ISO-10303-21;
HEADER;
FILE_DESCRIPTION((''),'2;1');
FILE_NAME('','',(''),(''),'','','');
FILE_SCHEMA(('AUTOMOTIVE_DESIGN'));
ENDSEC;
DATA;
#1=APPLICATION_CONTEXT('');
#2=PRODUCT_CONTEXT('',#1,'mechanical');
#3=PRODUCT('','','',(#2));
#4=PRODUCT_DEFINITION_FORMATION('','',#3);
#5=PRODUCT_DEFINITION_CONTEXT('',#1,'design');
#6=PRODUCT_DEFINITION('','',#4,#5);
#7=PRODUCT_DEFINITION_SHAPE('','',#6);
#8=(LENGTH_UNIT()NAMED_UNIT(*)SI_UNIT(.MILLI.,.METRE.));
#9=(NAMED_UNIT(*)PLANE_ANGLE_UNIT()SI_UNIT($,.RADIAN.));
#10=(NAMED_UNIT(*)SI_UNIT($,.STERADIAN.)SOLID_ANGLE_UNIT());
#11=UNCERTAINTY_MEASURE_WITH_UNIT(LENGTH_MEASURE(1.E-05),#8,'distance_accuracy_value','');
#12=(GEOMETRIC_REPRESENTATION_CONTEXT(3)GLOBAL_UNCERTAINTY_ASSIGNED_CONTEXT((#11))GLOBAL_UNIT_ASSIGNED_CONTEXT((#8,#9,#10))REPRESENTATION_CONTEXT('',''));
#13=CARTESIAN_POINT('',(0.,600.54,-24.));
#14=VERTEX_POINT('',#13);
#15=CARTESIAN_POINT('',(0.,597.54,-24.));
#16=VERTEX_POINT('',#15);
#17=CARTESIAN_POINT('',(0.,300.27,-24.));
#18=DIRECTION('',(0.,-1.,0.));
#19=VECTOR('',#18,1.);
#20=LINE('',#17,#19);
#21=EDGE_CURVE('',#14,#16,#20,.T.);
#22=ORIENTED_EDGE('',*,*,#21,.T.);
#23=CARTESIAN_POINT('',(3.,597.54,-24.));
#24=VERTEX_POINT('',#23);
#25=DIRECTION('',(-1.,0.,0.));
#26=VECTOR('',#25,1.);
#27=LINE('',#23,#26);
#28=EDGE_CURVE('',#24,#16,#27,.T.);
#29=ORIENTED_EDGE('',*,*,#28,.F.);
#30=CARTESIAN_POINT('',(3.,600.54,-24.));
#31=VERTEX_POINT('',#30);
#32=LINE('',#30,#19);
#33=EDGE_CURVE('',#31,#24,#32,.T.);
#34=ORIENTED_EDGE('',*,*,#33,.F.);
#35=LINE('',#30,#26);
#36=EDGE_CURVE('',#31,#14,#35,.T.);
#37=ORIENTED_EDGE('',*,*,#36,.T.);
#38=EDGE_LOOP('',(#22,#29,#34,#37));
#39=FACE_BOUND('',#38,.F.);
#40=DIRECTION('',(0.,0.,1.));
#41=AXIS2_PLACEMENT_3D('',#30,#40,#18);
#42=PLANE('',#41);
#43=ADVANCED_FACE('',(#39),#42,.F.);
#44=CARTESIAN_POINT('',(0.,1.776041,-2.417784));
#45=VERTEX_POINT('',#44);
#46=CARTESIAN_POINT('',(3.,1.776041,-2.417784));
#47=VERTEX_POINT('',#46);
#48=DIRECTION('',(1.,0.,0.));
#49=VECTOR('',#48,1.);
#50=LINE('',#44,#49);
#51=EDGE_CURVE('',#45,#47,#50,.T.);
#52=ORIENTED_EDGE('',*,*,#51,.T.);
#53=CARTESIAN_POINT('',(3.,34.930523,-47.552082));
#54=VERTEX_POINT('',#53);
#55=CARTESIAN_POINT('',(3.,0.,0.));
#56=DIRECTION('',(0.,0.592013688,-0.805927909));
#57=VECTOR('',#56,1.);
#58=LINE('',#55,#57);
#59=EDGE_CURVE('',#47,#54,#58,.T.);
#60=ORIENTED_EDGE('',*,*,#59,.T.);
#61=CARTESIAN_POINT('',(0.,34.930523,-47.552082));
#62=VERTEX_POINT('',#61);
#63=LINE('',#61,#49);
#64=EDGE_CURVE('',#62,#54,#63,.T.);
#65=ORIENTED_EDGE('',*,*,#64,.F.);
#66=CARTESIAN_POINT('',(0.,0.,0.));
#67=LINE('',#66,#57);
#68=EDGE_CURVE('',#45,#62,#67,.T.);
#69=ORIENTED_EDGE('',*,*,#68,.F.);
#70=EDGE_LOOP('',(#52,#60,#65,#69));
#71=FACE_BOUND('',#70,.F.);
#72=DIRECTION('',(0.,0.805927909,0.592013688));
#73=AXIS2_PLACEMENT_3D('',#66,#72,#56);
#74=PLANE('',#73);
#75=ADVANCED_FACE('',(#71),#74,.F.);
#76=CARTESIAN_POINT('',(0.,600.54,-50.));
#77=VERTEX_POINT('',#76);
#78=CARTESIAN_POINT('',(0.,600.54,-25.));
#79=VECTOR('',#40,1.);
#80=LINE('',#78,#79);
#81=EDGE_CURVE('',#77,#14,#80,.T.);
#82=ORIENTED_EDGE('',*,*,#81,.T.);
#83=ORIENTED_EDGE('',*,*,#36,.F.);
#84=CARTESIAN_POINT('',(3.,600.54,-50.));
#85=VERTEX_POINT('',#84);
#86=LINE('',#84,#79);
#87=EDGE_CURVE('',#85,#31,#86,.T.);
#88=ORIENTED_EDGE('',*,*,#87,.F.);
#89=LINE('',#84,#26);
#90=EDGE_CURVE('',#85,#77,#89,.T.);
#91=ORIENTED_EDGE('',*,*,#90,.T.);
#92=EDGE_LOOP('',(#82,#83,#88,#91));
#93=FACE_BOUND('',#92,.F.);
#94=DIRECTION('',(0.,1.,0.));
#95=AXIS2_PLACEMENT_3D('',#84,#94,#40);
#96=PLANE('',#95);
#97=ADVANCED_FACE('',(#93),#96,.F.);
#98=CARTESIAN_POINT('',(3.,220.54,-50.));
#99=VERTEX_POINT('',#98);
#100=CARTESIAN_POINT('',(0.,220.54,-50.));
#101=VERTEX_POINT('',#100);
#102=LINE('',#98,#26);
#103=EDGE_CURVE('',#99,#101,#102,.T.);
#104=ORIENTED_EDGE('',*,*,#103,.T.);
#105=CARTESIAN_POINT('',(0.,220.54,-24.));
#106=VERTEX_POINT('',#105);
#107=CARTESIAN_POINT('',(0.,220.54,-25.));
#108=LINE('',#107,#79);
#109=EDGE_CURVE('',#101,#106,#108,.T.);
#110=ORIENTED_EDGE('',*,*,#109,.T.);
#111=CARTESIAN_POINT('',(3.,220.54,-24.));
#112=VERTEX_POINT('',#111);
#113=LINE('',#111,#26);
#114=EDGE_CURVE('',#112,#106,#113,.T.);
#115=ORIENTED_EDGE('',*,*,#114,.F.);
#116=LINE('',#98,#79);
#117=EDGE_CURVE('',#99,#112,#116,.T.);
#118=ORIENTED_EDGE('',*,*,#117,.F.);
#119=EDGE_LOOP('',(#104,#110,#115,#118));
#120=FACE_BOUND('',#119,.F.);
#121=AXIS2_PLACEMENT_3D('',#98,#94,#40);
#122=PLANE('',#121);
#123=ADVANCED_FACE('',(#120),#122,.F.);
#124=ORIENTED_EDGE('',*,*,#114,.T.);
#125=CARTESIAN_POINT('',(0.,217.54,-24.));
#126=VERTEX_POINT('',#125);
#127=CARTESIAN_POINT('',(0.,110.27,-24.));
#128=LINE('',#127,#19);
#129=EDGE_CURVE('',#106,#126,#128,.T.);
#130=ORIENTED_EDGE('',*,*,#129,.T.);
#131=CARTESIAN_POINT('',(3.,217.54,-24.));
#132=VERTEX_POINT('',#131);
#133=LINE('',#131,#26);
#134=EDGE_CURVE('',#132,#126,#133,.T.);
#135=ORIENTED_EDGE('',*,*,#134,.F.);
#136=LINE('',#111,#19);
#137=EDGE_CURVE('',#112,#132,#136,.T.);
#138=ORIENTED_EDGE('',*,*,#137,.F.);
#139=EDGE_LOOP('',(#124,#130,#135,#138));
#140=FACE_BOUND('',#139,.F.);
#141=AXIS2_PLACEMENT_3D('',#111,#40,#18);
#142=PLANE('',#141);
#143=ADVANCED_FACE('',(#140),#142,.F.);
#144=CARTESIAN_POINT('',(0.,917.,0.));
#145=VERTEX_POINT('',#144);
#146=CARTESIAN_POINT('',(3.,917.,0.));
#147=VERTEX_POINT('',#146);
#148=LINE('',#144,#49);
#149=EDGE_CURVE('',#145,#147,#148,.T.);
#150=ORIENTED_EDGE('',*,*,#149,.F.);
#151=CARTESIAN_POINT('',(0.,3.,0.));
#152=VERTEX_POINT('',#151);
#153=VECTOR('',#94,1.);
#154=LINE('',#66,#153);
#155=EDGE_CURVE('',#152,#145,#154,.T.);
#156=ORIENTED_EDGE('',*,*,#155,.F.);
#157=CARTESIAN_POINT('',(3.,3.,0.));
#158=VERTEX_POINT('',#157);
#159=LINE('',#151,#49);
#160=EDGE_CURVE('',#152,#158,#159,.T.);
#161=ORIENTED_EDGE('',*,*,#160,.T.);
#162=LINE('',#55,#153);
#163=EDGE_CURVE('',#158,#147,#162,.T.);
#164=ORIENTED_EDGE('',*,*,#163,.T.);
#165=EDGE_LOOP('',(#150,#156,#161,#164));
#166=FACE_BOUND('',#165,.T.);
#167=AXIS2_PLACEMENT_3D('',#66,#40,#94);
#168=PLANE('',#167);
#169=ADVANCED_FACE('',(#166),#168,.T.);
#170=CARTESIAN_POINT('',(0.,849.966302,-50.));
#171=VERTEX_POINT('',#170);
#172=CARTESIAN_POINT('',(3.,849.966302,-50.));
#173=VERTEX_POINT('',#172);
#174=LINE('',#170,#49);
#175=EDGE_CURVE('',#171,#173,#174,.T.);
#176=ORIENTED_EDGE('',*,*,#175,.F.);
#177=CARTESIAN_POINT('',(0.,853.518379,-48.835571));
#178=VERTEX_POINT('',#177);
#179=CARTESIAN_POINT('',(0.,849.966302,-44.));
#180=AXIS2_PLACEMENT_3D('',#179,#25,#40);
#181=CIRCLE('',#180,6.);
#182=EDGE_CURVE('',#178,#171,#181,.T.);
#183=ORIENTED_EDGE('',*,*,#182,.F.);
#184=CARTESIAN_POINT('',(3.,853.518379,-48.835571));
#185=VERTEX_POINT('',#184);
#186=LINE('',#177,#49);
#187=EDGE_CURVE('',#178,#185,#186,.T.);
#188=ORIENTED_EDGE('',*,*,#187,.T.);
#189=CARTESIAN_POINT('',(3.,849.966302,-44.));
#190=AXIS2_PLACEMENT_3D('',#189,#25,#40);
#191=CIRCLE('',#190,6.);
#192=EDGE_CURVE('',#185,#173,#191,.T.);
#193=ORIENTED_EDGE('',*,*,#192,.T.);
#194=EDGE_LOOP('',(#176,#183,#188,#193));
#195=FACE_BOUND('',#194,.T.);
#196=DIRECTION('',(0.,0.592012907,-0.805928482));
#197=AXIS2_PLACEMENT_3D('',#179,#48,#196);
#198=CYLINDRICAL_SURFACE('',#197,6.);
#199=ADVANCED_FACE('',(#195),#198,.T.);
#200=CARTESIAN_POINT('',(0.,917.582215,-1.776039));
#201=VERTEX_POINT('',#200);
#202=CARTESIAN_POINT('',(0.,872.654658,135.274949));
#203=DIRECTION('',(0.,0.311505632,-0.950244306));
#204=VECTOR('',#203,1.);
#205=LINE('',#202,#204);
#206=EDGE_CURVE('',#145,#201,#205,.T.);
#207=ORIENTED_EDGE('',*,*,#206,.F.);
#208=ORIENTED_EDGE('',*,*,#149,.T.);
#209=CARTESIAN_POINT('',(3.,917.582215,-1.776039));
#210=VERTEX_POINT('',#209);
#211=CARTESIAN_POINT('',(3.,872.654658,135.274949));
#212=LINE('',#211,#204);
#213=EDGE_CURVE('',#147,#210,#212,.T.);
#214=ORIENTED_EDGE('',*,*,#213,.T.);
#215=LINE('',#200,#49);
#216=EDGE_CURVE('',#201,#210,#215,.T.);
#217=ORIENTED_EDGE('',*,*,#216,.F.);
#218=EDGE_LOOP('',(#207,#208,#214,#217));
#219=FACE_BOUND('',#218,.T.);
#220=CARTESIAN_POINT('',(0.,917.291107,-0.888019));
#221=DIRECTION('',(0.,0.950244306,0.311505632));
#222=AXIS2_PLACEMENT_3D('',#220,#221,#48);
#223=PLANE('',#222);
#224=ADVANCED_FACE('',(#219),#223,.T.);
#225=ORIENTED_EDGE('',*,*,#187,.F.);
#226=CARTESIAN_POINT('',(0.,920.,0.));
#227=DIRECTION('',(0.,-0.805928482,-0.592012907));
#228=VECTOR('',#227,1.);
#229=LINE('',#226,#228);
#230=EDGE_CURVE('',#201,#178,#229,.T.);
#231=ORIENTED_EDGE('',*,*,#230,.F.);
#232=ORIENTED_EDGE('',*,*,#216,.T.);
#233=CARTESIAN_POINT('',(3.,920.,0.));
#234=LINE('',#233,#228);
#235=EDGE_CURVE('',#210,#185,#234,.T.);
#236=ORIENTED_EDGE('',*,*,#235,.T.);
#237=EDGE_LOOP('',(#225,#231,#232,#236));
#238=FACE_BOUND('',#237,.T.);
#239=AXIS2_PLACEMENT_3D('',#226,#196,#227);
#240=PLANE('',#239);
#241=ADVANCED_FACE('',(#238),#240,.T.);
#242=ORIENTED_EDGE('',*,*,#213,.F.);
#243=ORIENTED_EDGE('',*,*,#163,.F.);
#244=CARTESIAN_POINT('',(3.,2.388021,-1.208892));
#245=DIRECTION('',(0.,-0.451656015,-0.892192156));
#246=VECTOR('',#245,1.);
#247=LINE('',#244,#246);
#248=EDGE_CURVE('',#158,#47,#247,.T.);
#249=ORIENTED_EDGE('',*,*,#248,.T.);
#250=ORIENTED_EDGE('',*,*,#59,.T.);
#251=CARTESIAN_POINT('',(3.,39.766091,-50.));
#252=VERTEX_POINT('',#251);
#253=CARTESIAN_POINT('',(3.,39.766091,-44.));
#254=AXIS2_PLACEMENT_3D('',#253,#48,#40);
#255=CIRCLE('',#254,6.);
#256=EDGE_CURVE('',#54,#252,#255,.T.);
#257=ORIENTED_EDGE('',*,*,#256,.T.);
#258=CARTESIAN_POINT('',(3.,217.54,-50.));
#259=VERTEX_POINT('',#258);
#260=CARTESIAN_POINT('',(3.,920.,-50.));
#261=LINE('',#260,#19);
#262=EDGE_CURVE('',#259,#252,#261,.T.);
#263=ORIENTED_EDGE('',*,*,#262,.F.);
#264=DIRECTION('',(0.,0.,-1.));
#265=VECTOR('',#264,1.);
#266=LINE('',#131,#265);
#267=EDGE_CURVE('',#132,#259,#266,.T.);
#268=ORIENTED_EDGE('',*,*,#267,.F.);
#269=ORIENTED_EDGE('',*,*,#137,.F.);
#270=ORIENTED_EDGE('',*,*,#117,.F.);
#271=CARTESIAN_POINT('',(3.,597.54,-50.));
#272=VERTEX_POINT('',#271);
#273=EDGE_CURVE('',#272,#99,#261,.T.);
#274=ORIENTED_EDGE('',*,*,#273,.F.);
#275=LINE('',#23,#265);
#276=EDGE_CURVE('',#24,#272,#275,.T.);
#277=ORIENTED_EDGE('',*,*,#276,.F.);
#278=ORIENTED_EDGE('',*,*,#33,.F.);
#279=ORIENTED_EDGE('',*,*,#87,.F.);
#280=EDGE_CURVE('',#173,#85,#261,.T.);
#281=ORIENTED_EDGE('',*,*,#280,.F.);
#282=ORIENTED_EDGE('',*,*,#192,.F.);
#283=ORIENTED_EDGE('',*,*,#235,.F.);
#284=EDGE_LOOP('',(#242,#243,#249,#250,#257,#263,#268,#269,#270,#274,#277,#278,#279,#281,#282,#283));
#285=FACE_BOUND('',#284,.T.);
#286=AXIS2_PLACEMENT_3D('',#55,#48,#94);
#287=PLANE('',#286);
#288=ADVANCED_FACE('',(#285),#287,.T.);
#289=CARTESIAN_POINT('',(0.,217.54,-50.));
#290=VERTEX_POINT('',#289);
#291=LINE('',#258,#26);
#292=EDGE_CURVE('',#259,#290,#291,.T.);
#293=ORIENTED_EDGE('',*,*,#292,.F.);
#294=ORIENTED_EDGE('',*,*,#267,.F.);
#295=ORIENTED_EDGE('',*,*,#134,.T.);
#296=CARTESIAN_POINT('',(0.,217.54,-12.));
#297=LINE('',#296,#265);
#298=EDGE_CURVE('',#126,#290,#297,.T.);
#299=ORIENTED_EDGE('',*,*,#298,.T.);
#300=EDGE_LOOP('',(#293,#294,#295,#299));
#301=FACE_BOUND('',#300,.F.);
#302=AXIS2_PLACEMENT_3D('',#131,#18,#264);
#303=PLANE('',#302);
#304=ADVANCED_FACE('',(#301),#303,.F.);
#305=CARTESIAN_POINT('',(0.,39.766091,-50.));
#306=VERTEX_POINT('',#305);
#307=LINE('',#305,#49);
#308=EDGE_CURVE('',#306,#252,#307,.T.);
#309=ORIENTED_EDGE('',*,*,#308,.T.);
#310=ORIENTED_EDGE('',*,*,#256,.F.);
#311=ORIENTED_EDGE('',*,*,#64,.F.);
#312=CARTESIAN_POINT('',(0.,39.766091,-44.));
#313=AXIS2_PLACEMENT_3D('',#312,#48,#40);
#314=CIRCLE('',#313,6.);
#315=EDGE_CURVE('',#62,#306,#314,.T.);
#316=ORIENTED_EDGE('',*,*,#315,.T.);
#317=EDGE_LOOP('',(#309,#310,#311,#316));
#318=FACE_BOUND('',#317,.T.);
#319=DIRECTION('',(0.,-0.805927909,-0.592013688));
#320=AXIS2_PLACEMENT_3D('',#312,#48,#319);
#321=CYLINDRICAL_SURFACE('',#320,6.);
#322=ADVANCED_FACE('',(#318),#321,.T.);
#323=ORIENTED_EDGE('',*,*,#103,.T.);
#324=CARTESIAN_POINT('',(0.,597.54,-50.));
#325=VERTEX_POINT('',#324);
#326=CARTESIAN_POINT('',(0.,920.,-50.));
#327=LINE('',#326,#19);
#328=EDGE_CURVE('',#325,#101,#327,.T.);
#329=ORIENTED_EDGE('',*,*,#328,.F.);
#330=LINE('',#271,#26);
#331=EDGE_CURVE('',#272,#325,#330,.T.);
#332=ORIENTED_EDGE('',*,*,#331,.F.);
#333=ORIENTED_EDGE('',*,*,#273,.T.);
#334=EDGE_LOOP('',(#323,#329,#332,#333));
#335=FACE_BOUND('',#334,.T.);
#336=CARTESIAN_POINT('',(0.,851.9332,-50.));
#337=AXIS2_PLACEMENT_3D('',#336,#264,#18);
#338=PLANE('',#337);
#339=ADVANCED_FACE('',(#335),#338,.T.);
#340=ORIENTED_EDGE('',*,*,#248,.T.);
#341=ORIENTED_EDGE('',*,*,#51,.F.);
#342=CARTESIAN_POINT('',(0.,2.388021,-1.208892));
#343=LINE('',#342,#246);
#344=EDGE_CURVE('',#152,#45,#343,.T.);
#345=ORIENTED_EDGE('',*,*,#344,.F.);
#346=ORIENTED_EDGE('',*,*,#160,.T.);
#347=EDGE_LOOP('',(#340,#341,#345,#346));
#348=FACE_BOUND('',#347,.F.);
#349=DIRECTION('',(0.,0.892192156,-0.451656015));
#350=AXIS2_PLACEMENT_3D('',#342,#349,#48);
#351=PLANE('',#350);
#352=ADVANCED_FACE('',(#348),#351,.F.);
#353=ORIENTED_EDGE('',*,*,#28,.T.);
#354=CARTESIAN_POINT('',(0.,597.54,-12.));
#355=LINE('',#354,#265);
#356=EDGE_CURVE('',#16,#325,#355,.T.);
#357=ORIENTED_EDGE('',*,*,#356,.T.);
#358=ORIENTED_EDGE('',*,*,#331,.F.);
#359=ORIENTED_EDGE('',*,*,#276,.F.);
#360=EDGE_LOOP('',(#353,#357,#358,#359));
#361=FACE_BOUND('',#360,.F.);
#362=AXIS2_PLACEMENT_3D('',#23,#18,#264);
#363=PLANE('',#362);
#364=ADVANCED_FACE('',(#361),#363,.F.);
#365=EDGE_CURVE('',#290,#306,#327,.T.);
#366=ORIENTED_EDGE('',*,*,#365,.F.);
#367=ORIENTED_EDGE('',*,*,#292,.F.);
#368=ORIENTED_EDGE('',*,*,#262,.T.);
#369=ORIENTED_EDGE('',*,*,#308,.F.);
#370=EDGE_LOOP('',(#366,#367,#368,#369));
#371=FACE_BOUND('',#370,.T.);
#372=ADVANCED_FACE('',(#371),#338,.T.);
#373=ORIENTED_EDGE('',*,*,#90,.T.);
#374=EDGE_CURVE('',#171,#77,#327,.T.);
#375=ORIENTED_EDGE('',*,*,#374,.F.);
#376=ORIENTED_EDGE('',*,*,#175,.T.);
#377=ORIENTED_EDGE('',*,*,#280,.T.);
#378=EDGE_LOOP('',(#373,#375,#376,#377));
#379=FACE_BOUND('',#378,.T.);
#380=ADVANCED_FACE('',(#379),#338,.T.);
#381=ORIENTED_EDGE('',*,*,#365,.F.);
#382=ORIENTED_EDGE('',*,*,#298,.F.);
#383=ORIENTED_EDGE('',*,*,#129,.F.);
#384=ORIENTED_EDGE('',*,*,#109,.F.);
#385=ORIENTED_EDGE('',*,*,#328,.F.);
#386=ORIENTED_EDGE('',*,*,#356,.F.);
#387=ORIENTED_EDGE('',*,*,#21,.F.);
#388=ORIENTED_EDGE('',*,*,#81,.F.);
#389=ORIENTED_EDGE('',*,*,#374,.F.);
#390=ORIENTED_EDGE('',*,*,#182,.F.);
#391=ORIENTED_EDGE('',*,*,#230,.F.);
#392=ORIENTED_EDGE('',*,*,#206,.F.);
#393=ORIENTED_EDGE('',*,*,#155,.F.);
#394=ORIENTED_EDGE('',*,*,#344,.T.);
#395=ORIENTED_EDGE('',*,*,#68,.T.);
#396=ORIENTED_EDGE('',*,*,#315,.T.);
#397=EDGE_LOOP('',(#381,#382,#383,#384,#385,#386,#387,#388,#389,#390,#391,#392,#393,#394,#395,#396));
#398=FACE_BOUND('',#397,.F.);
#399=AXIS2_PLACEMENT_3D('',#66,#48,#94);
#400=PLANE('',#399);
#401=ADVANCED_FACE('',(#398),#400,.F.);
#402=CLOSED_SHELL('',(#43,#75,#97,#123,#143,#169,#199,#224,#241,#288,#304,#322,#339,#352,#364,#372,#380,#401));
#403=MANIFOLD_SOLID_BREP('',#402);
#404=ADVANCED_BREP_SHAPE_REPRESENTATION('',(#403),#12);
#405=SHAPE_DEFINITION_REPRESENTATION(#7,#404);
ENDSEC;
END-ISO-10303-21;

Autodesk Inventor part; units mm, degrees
ref_plane "YZ Plane" through (0, 0, 0) normal (1, 0, 0) x (0, 1, 0)
ref_plane "XZ Plane" through (0, 0, 0) normal (0, 1, 0) x (-1, 0, 0)
ref_plane "XY Plane" through (0, 0, 0) normal (0, 0, 1) x (1, 0, 0)
sketch "Sketch2" plane through (0, 0, 0) normal (1, 0, 0) x (0, 1, 0)
  line L0 (0, 0) -> (920, 0)
  line L1 (920, 0) -> (920, -50)
  line L2 (920, -50) -> (0, -50)
  line L3 (0, -50) -> (0, 0)
  line L4 (920, -50) -> (883.2713, 0) construction
  line L5 (920, 0) -> (851.9332, -50)
  line L6 (0, 0) -> (36.7287, -50)
  dimension "d28" = 920
  dimension "d29" = 50
  dimension "d31" = 36.3
  dimension "d32" = 53.7
  dimension "d36" = 53.7
extrude "Plate2" add sketch "Sketch2" along normal blind 3 contours L0 L5 L2 L6
chamfer "Corner Chamfer1" distance 3 angle 45 2 edges at (1.5, 920, 0) (1.5, 0, 0)
fillet "Corner Round1" radius 6 2 edges at (1.5, 36.7287, -50) (1.5, 851.9332, -50)
sketch "Sketch3" plane through (3, 0, 0) normal (1, 0, 0) x (0, 0, -1)
  line L0 (24, 217.54) -> (50, 217.54)
  line L1 (50, 217.54) -> (50, 220.54)
  line L2 (50, 220.54) -> (24, 220.54)
  line L3 (24, 220.54) -> (24, 217.54)
  line L4 (50, 849.9663) -> (50, 39.766) projected
  line L5 (50, 219.04) -> (0, 219.04) construction
  line L6 (0, 3) -> (0, 917) projected
  line L7 (50, 599.04) -> (0, 599.04) construction
  line L8 (24, 597.54) -> (50, 597.54)
  line L9 (50, 597.54) -> (50, 600.54)
  line L10 (50, 600.54) -> (24, 600.54)
  line L11 (24, 600.54) -> (24, 597.54)
  point P0 (0, 0)
  dimension "d39" = 26
  dimension "d40" = 3
  dimension "d41" = 219.04
  dimension "d42" = 599.04
  dimension "d43" = 3
  dimension "d44" = 26
extrude "Extrusion1" cut sketch "Sketch3" against normal through all
sketch "Sketch4" plane through (3, 0, 0) normal (1, 0, 0) x (0, 0, -1)
  line L0 (17.0121, 486.3959) -> (33.8114, 486.3959) construction
  line L1 (33.8114, 486.3959) -> (33.8114, 335.9678) construction
  line L2 (33.8114, 335.9678) -> (17.0121, 335.9678) construction
  line L3 (17.0121, 335.9678) -> (17.0121, 486.3959) construction
  point P0 (0, 0)
mark "Mark1"
equation "\"d36\" = d32"
equation "\"d40\" = Thickness"
equation "\"d43\" = Thickness"
equation "\"d44\" = d39"
equation "\"d30\" = Thickness"
equation "\"BendReliefWidth\" = Thickness"
equation "\"BendReliefDepth\" = 0.5 * Thickness"
equation "\"CornerReliefSize\" = 4 * Thickness"
equation "\"MinimumRemnant\" = 2 * Thickness"
equation "\"TransitionRadius\" = BendRadius"
equation "\"JacobiRadiusSize\" = BendRadius"
equation "\"GapSize\" = Thickness"
equation "\"Thickness\" = 3"
equation "\"BendRadius\" = 5"
properties part number "MSC 110 STRINGER CONE" material "Stainless Steel"
